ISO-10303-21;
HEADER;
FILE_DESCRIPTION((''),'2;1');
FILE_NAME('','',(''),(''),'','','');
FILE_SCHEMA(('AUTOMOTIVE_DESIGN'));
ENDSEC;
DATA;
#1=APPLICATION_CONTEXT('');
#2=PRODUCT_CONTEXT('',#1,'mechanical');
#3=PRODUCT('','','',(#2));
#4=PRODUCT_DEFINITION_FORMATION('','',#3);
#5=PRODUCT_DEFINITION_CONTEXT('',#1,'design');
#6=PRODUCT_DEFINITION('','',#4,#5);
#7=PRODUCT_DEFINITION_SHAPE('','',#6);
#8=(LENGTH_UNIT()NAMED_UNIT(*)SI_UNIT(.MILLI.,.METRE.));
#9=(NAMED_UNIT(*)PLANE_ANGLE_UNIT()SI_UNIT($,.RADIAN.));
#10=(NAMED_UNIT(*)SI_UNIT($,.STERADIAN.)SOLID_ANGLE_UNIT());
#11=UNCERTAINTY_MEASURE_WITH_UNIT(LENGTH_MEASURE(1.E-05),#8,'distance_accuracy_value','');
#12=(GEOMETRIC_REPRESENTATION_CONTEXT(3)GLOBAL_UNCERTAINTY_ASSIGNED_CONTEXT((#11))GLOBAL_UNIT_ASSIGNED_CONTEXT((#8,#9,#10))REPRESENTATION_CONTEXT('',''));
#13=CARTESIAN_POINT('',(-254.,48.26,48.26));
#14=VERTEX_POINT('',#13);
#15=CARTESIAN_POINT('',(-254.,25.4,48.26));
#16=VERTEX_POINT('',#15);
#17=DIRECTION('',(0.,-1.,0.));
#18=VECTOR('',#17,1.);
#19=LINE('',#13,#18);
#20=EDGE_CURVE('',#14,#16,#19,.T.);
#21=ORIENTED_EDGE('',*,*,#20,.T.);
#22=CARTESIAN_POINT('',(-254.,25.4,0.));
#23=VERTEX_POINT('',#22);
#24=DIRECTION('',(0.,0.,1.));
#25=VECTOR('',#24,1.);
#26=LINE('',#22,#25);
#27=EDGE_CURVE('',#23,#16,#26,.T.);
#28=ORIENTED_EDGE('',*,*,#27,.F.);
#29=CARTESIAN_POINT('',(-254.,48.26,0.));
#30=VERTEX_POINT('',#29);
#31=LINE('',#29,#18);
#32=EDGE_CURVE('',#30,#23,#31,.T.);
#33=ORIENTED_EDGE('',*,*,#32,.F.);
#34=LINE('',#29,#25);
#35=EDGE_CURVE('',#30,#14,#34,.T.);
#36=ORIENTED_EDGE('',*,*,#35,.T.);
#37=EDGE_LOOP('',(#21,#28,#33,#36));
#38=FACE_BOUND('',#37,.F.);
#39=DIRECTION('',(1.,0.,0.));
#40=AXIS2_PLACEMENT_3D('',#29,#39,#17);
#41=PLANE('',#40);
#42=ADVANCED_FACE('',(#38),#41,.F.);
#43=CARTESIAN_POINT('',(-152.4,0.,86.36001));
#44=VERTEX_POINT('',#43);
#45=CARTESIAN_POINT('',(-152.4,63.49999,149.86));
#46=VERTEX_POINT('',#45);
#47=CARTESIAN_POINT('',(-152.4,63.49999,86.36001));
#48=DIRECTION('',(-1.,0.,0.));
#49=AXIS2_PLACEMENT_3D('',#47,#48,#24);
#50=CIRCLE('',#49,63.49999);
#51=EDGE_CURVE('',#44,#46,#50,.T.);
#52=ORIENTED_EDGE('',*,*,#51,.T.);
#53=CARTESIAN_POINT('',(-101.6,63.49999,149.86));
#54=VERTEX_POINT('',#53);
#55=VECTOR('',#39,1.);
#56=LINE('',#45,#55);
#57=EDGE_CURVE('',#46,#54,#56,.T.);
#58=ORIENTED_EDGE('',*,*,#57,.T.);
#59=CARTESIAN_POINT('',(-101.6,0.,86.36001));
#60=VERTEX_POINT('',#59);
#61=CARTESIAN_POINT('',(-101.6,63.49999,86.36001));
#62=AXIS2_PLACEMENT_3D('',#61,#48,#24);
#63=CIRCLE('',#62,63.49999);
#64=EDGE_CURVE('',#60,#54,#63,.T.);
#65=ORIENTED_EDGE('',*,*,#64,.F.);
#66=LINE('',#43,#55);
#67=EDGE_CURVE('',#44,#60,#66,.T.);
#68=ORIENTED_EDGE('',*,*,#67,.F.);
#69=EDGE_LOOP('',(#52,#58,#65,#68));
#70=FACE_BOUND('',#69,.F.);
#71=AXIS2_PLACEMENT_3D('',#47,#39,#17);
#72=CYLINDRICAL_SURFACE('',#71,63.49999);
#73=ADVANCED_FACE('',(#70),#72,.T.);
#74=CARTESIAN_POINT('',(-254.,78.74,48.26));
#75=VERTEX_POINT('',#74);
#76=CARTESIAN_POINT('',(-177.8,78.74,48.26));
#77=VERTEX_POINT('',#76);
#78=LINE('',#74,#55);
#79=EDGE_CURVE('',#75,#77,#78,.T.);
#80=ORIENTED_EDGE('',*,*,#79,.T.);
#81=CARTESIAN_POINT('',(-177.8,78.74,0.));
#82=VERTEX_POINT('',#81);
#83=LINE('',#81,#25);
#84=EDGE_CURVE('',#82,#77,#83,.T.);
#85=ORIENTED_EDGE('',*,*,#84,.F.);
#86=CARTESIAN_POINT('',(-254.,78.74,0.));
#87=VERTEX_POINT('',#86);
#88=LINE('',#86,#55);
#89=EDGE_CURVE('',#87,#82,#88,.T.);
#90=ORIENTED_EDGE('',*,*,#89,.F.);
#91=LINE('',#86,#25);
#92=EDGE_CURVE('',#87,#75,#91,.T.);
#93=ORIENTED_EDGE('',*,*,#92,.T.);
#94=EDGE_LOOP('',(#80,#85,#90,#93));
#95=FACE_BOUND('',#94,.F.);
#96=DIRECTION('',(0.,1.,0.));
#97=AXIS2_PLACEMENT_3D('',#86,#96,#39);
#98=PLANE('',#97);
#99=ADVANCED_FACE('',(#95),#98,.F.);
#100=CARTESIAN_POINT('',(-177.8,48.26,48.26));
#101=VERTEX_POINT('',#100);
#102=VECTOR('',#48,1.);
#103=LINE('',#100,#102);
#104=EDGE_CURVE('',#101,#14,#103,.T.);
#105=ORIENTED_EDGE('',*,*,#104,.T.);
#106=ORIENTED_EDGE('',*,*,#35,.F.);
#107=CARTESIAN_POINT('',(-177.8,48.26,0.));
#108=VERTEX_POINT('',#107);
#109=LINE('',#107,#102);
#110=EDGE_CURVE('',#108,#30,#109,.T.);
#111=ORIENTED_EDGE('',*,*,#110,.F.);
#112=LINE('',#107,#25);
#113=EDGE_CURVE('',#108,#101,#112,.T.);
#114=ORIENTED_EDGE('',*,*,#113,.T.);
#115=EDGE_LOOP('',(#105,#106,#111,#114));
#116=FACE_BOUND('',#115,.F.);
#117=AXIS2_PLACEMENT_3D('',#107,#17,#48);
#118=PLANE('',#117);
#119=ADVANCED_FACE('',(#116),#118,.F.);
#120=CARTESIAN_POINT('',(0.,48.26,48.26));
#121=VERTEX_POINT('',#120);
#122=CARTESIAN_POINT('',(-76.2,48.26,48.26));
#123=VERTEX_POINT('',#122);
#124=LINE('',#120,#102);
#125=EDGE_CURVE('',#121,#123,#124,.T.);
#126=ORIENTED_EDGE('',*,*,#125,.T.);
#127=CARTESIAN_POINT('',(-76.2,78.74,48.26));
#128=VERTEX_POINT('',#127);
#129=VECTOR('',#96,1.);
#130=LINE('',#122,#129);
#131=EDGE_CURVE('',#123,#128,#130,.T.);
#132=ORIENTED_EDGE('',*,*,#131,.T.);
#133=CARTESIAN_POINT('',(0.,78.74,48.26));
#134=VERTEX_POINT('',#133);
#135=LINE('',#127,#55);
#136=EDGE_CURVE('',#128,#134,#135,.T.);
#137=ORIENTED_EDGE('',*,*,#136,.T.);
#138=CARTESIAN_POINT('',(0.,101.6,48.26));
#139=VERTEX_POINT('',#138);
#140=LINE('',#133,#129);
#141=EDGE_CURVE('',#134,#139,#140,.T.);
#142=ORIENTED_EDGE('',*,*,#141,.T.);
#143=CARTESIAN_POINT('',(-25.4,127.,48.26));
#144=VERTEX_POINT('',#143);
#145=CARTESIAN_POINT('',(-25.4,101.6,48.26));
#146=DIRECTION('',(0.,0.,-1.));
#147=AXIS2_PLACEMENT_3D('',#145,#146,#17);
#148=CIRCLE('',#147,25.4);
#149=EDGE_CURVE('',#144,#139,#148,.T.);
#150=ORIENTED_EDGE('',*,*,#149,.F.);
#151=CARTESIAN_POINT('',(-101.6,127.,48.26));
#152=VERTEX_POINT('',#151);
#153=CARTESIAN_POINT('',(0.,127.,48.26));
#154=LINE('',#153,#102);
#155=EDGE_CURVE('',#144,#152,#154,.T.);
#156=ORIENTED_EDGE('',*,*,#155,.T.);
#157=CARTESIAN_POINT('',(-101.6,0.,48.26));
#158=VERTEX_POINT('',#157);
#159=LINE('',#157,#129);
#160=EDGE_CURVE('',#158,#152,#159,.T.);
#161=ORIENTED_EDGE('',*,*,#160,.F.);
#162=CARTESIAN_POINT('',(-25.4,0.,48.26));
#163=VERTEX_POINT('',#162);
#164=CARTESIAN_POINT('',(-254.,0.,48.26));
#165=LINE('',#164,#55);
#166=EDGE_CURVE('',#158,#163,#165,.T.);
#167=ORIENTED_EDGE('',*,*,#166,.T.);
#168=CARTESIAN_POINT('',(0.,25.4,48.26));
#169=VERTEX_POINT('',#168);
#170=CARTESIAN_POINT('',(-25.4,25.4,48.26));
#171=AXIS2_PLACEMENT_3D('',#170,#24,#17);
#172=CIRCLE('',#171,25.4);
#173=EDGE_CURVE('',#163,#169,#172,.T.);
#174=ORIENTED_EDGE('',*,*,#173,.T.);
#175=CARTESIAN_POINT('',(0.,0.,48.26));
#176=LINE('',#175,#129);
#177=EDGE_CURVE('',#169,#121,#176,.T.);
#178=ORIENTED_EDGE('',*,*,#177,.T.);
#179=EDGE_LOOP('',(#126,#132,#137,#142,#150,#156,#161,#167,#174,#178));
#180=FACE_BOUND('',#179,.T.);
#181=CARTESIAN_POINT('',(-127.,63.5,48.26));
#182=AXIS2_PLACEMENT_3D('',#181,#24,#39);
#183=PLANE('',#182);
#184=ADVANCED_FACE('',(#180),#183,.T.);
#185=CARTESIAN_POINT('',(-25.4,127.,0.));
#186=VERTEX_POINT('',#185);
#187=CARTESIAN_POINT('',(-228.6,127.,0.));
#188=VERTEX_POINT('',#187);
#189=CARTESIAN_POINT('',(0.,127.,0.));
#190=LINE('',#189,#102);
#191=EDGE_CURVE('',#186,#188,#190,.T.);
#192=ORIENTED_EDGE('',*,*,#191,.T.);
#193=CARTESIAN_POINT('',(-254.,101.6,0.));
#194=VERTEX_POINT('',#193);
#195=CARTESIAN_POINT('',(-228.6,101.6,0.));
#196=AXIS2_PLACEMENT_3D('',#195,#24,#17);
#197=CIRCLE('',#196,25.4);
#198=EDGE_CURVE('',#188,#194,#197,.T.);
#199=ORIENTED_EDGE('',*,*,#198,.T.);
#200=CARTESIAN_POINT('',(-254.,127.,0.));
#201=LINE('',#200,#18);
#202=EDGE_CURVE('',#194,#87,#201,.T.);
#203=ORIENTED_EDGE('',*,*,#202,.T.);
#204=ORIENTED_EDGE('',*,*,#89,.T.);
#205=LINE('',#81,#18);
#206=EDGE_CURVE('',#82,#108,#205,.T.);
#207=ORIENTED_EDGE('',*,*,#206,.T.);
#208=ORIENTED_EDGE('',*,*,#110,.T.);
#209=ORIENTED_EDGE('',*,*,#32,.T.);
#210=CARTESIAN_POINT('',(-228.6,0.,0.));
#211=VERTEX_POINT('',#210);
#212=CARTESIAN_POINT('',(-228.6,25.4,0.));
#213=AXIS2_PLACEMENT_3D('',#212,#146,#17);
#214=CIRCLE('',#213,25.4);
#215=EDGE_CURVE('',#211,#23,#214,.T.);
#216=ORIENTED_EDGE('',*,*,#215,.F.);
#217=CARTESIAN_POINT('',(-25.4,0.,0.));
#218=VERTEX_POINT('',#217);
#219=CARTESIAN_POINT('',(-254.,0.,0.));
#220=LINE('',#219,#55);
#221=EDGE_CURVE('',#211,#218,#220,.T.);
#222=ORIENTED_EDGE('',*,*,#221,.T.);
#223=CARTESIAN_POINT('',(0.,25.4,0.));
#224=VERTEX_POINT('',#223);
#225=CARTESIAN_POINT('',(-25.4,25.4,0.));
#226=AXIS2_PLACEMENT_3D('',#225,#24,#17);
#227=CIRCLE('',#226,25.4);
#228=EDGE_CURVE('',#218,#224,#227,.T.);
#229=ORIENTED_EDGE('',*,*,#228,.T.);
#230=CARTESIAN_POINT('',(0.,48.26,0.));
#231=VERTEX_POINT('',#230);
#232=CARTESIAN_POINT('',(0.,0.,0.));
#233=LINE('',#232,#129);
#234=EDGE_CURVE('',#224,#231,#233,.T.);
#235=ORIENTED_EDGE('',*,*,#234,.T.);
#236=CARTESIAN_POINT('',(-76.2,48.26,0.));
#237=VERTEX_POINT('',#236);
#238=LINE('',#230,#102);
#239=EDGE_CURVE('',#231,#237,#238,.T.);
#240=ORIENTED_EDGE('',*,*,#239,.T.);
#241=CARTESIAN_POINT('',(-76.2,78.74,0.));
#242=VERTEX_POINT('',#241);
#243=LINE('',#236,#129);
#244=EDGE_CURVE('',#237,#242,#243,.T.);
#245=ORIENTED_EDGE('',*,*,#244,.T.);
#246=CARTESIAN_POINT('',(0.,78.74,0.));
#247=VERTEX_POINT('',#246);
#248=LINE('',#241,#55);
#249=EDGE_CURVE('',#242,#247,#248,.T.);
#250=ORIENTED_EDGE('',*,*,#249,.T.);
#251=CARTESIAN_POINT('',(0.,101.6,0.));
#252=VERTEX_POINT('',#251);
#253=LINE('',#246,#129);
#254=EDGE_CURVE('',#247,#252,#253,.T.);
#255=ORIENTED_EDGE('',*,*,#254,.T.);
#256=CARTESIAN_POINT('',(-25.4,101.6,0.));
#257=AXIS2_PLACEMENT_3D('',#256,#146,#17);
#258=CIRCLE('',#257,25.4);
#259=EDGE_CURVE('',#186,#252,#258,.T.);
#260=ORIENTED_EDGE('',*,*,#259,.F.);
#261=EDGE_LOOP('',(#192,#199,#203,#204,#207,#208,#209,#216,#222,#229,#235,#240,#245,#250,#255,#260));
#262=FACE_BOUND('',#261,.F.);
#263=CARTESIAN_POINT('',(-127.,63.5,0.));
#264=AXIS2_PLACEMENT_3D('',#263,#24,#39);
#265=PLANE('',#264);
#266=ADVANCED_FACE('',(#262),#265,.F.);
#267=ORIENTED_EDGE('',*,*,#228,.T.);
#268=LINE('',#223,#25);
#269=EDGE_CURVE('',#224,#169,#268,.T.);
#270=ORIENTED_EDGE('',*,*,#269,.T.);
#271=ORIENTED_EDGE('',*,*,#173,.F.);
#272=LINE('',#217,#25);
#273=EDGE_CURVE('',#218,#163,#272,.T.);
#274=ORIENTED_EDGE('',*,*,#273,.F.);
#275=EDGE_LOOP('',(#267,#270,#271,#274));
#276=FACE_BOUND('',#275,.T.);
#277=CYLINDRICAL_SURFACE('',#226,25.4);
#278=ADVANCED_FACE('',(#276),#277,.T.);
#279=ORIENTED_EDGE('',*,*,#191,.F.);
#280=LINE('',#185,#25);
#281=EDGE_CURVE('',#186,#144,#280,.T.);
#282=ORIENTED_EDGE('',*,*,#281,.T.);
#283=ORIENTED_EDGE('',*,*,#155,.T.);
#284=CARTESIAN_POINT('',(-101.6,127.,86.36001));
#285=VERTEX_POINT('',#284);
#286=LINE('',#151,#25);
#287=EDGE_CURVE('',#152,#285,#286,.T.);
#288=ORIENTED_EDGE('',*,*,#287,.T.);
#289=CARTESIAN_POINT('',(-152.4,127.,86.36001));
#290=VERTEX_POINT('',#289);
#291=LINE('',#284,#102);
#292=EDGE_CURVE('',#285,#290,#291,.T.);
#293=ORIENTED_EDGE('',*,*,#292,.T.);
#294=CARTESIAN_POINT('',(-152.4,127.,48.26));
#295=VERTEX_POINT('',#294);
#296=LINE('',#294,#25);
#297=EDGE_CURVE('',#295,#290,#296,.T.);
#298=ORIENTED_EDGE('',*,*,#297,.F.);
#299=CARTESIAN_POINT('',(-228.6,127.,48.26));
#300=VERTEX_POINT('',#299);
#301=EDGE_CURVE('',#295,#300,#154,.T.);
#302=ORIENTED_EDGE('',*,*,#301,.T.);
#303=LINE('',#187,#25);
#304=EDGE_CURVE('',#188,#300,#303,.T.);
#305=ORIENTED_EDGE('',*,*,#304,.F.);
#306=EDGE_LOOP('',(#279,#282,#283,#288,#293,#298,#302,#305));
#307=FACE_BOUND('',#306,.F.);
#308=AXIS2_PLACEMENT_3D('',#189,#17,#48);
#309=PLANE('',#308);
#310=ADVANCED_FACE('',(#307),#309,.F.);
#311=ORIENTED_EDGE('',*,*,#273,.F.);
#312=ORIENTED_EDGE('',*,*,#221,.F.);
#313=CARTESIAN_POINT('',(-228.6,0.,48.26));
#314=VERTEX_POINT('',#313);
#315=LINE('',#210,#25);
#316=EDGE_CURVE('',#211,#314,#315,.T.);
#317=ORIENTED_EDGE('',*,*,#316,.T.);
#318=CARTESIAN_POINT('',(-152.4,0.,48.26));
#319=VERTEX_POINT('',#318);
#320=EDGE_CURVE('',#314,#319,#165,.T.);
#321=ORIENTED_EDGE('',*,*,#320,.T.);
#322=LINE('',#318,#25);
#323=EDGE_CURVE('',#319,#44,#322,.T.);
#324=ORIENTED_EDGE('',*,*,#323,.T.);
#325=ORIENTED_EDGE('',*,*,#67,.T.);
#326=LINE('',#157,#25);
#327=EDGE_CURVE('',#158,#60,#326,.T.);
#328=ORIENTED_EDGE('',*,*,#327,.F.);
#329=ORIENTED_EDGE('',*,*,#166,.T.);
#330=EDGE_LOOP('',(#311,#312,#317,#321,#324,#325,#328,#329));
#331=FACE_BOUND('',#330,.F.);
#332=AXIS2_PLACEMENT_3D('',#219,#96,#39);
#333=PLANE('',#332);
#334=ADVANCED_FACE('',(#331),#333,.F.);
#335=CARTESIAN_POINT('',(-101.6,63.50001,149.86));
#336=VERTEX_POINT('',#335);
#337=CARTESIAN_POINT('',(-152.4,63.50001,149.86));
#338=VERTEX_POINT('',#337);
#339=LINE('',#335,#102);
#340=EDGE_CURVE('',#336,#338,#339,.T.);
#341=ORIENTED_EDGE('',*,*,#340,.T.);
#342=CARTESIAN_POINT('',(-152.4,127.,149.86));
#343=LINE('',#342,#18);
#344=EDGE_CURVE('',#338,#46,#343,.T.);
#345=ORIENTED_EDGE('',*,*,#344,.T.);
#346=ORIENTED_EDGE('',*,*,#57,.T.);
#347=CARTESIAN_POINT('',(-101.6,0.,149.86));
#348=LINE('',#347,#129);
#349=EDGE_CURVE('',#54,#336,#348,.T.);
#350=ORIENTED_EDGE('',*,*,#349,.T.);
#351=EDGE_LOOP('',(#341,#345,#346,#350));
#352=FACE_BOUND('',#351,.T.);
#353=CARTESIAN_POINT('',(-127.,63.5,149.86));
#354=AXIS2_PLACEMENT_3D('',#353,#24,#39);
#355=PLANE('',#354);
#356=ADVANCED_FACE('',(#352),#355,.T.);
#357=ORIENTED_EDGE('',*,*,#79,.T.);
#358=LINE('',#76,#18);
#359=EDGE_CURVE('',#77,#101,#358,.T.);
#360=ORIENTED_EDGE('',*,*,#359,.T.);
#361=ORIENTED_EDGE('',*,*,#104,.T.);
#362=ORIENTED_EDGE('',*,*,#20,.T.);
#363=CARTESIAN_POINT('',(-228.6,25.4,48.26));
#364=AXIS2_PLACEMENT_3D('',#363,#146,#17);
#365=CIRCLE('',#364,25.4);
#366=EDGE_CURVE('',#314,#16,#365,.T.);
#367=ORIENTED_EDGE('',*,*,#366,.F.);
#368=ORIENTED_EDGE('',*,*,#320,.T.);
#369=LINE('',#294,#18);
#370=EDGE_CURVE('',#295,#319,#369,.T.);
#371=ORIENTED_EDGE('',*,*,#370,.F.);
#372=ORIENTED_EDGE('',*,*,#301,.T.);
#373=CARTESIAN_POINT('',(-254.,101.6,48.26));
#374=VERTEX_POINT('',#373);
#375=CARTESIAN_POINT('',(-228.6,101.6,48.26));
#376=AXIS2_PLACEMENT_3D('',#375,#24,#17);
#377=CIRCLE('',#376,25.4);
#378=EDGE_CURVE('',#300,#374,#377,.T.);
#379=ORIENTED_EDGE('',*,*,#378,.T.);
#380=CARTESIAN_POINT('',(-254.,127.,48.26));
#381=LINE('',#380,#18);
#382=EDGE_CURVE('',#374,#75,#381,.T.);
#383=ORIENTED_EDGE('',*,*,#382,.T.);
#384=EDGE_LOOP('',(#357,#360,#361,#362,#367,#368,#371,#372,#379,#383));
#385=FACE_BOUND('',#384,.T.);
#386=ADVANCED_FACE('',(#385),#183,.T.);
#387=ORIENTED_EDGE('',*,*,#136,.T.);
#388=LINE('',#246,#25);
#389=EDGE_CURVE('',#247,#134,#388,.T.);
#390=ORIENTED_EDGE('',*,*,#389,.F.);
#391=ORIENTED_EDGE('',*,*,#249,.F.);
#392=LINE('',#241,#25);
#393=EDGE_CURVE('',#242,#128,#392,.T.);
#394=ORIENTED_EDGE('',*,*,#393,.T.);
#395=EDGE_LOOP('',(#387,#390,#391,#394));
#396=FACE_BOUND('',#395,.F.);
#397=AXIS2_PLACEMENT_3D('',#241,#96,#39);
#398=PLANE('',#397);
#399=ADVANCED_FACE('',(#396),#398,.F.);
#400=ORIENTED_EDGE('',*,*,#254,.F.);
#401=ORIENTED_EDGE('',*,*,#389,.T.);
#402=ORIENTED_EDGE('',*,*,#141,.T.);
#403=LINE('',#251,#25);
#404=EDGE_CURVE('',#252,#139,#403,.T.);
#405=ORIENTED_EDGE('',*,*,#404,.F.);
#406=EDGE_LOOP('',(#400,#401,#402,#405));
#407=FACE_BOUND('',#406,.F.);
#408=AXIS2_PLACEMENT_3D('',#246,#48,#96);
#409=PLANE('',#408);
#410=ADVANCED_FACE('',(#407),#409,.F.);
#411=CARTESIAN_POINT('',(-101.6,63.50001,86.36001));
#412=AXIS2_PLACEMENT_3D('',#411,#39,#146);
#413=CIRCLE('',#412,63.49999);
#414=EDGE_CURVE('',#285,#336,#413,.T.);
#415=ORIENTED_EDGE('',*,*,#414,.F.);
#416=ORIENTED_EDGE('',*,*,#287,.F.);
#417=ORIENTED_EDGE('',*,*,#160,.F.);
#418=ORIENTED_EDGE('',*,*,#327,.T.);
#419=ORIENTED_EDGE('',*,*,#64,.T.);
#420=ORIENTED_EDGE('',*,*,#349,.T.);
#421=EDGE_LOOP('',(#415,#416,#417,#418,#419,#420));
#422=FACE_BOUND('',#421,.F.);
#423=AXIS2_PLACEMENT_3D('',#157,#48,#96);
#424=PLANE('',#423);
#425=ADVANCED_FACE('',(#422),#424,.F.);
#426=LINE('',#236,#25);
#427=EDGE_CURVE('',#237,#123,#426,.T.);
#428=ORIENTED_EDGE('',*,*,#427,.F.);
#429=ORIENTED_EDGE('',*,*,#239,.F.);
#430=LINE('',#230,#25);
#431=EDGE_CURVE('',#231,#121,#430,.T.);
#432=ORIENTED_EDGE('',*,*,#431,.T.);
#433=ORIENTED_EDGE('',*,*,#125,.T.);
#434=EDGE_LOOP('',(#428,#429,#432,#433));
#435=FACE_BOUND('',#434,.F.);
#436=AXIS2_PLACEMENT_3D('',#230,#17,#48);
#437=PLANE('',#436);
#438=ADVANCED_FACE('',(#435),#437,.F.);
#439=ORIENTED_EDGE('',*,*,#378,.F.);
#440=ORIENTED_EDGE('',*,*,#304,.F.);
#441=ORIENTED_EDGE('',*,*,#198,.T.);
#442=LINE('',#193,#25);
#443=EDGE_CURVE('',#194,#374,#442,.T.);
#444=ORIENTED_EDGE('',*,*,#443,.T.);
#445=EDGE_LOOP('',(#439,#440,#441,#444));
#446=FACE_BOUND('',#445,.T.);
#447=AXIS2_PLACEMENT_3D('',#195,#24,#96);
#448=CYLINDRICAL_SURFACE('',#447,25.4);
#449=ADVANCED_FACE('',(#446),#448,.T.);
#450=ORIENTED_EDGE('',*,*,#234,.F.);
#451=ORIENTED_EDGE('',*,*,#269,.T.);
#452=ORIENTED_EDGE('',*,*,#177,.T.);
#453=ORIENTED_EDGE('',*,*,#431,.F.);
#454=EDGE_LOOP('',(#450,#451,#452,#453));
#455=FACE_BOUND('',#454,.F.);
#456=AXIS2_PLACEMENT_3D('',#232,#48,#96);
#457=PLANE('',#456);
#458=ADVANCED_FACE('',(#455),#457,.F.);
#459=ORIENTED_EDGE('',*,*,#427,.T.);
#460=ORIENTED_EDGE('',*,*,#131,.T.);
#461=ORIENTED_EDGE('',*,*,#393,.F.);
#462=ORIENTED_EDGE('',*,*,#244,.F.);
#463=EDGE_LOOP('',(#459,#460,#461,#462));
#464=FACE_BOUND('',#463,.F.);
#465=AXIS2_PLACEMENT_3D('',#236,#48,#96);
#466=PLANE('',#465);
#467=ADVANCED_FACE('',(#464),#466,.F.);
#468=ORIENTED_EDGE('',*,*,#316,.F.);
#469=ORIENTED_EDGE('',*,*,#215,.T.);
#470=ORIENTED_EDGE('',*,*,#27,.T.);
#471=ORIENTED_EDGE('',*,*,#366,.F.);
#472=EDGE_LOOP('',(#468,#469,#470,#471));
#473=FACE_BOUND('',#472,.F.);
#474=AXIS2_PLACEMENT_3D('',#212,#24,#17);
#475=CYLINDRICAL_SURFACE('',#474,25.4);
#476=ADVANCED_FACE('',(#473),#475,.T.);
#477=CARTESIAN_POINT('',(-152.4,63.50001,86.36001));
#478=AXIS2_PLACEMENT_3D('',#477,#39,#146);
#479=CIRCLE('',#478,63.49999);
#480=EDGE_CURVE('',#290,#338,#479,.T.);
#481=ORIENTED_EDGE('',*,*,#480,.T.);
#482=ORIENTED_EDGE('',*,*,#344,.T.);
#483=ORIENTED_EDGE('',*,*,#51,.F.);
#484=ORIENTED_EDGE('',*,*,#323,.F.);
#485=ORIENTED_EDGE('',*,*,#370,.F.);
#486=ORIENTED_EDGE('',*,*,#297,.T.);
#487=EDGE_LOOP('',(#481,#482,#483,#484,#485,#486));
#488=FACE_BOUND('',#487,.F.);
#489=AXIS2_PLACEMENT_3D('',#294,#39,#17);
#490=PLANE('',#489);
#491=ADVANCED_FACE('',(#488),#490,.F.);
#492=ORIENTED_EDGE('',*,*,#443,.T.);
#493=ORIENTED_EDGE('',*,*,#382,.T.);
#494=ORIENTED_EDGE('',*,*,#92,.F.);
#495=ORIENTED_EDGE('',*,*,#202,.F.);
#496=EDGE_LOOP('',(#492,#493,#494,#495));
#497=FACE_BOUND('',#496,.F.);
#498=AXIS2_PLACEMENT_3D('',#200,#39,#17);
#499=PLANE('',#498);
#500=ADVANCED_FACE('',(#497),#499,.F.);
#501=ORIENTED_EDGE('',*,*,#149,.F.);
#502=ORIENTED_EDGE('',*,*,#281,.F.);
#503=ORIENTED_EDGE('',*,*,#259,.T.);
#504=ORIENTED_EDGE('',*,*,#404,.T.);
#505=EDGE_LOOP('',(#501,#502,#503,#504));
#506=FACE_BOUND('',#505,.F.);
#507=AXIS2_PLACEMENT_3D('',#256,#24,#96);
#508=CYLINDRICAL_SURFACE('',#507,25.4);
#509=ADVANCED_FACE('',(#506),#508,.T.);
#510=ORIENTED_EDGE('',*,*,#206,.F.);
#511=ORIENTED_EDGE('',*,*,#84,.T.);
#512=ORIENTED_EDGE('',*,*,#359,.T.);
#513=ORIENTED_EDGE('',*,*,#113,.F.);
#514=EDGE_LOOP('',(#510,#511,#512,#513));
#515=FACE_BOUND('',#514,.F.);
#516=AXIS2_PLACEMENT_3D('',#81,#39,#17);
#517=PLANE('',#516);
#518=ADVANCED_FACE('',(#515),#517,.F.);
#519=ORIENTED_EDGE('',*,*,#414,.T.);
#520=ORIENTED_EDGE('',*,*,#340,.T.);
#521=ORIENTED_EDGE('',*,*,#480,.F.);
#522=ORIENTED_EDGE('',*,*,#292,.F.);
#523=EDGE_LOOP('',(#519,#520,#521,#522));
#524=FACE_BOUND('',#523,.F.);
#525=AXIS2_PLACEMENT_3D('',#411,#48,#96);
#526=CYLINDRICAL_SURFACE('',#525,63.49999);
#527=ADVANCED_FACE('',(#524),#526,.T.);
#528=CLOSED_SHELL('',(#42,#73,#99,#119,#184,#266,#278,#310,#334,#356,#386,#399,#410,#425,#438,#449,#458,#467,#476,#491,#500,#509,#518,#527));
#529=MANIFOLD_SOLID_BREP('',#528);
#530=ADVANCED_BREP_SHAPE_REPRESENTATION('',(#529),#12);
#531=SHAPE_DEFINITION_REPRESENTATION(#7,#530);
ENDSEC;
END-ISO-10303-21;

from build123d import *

# Parameters (mm, degrees)
F1_DEPTH = 48.26
F3_DEPTH = 101.6
F4_R     = 63.49999
F5_R     = 25.4


# Not quite as in the source:
# - a fillet or chamfer is up to 0.001 mm smaller than in the source, because OpenCascade refuses the exact size
# - a feature names something its author has since deleted; it is built from what else it names


with BuildPart() as f1:
    # F0 (on Top) → F1 (new body)
    with BuildSketch(Plane.XY):
        Polygon((-254, 0), (0, 0), (0, 48.26), (-76.2, 48.26), (-76.2, 78.74), (0, 78.74), (0, 127), (-101.6, 127), (-152.4, 127), (-254, 127), (-254, 78.74), (-177.8, 78.74), (-177.8, 48.26), (-254, 48.26), align=None)
    extrude(amount=F1_DEPTH)

    # F2 (on face) → F3 (join)
    with BuildSketch(Plane.XY.offset(48.26)):
        Polygon((-101.6, 127), (-127, 127), (-152.4, 127), (-152.4, 0), (-101.6, 0), align=None)
    extrude(amount=F3_DEPTH)

    # F4 (radius 63.5 in the source; OpenCascade refuses exactly that, so slightly less here)
    f4_edges = [f1.edges().sort_by_distance(p)[0] for p in [
        (-127, 0, 149.86),
        (-127, 127, 149.86),
    ]]
    fillet(f4_edges, radius=F4_R)

    # F5
    f5_edges = [f1.edges().sort_by_distance(p)[0] for p in [
        (-254, 0, 24.13),
        (0, 0, 24.13),
        (-254, 127, 24.13),
        (0, 127, 24.13),
    ]]
    fillet(f5_edges, radius=F5_R)


solid = f1.part
